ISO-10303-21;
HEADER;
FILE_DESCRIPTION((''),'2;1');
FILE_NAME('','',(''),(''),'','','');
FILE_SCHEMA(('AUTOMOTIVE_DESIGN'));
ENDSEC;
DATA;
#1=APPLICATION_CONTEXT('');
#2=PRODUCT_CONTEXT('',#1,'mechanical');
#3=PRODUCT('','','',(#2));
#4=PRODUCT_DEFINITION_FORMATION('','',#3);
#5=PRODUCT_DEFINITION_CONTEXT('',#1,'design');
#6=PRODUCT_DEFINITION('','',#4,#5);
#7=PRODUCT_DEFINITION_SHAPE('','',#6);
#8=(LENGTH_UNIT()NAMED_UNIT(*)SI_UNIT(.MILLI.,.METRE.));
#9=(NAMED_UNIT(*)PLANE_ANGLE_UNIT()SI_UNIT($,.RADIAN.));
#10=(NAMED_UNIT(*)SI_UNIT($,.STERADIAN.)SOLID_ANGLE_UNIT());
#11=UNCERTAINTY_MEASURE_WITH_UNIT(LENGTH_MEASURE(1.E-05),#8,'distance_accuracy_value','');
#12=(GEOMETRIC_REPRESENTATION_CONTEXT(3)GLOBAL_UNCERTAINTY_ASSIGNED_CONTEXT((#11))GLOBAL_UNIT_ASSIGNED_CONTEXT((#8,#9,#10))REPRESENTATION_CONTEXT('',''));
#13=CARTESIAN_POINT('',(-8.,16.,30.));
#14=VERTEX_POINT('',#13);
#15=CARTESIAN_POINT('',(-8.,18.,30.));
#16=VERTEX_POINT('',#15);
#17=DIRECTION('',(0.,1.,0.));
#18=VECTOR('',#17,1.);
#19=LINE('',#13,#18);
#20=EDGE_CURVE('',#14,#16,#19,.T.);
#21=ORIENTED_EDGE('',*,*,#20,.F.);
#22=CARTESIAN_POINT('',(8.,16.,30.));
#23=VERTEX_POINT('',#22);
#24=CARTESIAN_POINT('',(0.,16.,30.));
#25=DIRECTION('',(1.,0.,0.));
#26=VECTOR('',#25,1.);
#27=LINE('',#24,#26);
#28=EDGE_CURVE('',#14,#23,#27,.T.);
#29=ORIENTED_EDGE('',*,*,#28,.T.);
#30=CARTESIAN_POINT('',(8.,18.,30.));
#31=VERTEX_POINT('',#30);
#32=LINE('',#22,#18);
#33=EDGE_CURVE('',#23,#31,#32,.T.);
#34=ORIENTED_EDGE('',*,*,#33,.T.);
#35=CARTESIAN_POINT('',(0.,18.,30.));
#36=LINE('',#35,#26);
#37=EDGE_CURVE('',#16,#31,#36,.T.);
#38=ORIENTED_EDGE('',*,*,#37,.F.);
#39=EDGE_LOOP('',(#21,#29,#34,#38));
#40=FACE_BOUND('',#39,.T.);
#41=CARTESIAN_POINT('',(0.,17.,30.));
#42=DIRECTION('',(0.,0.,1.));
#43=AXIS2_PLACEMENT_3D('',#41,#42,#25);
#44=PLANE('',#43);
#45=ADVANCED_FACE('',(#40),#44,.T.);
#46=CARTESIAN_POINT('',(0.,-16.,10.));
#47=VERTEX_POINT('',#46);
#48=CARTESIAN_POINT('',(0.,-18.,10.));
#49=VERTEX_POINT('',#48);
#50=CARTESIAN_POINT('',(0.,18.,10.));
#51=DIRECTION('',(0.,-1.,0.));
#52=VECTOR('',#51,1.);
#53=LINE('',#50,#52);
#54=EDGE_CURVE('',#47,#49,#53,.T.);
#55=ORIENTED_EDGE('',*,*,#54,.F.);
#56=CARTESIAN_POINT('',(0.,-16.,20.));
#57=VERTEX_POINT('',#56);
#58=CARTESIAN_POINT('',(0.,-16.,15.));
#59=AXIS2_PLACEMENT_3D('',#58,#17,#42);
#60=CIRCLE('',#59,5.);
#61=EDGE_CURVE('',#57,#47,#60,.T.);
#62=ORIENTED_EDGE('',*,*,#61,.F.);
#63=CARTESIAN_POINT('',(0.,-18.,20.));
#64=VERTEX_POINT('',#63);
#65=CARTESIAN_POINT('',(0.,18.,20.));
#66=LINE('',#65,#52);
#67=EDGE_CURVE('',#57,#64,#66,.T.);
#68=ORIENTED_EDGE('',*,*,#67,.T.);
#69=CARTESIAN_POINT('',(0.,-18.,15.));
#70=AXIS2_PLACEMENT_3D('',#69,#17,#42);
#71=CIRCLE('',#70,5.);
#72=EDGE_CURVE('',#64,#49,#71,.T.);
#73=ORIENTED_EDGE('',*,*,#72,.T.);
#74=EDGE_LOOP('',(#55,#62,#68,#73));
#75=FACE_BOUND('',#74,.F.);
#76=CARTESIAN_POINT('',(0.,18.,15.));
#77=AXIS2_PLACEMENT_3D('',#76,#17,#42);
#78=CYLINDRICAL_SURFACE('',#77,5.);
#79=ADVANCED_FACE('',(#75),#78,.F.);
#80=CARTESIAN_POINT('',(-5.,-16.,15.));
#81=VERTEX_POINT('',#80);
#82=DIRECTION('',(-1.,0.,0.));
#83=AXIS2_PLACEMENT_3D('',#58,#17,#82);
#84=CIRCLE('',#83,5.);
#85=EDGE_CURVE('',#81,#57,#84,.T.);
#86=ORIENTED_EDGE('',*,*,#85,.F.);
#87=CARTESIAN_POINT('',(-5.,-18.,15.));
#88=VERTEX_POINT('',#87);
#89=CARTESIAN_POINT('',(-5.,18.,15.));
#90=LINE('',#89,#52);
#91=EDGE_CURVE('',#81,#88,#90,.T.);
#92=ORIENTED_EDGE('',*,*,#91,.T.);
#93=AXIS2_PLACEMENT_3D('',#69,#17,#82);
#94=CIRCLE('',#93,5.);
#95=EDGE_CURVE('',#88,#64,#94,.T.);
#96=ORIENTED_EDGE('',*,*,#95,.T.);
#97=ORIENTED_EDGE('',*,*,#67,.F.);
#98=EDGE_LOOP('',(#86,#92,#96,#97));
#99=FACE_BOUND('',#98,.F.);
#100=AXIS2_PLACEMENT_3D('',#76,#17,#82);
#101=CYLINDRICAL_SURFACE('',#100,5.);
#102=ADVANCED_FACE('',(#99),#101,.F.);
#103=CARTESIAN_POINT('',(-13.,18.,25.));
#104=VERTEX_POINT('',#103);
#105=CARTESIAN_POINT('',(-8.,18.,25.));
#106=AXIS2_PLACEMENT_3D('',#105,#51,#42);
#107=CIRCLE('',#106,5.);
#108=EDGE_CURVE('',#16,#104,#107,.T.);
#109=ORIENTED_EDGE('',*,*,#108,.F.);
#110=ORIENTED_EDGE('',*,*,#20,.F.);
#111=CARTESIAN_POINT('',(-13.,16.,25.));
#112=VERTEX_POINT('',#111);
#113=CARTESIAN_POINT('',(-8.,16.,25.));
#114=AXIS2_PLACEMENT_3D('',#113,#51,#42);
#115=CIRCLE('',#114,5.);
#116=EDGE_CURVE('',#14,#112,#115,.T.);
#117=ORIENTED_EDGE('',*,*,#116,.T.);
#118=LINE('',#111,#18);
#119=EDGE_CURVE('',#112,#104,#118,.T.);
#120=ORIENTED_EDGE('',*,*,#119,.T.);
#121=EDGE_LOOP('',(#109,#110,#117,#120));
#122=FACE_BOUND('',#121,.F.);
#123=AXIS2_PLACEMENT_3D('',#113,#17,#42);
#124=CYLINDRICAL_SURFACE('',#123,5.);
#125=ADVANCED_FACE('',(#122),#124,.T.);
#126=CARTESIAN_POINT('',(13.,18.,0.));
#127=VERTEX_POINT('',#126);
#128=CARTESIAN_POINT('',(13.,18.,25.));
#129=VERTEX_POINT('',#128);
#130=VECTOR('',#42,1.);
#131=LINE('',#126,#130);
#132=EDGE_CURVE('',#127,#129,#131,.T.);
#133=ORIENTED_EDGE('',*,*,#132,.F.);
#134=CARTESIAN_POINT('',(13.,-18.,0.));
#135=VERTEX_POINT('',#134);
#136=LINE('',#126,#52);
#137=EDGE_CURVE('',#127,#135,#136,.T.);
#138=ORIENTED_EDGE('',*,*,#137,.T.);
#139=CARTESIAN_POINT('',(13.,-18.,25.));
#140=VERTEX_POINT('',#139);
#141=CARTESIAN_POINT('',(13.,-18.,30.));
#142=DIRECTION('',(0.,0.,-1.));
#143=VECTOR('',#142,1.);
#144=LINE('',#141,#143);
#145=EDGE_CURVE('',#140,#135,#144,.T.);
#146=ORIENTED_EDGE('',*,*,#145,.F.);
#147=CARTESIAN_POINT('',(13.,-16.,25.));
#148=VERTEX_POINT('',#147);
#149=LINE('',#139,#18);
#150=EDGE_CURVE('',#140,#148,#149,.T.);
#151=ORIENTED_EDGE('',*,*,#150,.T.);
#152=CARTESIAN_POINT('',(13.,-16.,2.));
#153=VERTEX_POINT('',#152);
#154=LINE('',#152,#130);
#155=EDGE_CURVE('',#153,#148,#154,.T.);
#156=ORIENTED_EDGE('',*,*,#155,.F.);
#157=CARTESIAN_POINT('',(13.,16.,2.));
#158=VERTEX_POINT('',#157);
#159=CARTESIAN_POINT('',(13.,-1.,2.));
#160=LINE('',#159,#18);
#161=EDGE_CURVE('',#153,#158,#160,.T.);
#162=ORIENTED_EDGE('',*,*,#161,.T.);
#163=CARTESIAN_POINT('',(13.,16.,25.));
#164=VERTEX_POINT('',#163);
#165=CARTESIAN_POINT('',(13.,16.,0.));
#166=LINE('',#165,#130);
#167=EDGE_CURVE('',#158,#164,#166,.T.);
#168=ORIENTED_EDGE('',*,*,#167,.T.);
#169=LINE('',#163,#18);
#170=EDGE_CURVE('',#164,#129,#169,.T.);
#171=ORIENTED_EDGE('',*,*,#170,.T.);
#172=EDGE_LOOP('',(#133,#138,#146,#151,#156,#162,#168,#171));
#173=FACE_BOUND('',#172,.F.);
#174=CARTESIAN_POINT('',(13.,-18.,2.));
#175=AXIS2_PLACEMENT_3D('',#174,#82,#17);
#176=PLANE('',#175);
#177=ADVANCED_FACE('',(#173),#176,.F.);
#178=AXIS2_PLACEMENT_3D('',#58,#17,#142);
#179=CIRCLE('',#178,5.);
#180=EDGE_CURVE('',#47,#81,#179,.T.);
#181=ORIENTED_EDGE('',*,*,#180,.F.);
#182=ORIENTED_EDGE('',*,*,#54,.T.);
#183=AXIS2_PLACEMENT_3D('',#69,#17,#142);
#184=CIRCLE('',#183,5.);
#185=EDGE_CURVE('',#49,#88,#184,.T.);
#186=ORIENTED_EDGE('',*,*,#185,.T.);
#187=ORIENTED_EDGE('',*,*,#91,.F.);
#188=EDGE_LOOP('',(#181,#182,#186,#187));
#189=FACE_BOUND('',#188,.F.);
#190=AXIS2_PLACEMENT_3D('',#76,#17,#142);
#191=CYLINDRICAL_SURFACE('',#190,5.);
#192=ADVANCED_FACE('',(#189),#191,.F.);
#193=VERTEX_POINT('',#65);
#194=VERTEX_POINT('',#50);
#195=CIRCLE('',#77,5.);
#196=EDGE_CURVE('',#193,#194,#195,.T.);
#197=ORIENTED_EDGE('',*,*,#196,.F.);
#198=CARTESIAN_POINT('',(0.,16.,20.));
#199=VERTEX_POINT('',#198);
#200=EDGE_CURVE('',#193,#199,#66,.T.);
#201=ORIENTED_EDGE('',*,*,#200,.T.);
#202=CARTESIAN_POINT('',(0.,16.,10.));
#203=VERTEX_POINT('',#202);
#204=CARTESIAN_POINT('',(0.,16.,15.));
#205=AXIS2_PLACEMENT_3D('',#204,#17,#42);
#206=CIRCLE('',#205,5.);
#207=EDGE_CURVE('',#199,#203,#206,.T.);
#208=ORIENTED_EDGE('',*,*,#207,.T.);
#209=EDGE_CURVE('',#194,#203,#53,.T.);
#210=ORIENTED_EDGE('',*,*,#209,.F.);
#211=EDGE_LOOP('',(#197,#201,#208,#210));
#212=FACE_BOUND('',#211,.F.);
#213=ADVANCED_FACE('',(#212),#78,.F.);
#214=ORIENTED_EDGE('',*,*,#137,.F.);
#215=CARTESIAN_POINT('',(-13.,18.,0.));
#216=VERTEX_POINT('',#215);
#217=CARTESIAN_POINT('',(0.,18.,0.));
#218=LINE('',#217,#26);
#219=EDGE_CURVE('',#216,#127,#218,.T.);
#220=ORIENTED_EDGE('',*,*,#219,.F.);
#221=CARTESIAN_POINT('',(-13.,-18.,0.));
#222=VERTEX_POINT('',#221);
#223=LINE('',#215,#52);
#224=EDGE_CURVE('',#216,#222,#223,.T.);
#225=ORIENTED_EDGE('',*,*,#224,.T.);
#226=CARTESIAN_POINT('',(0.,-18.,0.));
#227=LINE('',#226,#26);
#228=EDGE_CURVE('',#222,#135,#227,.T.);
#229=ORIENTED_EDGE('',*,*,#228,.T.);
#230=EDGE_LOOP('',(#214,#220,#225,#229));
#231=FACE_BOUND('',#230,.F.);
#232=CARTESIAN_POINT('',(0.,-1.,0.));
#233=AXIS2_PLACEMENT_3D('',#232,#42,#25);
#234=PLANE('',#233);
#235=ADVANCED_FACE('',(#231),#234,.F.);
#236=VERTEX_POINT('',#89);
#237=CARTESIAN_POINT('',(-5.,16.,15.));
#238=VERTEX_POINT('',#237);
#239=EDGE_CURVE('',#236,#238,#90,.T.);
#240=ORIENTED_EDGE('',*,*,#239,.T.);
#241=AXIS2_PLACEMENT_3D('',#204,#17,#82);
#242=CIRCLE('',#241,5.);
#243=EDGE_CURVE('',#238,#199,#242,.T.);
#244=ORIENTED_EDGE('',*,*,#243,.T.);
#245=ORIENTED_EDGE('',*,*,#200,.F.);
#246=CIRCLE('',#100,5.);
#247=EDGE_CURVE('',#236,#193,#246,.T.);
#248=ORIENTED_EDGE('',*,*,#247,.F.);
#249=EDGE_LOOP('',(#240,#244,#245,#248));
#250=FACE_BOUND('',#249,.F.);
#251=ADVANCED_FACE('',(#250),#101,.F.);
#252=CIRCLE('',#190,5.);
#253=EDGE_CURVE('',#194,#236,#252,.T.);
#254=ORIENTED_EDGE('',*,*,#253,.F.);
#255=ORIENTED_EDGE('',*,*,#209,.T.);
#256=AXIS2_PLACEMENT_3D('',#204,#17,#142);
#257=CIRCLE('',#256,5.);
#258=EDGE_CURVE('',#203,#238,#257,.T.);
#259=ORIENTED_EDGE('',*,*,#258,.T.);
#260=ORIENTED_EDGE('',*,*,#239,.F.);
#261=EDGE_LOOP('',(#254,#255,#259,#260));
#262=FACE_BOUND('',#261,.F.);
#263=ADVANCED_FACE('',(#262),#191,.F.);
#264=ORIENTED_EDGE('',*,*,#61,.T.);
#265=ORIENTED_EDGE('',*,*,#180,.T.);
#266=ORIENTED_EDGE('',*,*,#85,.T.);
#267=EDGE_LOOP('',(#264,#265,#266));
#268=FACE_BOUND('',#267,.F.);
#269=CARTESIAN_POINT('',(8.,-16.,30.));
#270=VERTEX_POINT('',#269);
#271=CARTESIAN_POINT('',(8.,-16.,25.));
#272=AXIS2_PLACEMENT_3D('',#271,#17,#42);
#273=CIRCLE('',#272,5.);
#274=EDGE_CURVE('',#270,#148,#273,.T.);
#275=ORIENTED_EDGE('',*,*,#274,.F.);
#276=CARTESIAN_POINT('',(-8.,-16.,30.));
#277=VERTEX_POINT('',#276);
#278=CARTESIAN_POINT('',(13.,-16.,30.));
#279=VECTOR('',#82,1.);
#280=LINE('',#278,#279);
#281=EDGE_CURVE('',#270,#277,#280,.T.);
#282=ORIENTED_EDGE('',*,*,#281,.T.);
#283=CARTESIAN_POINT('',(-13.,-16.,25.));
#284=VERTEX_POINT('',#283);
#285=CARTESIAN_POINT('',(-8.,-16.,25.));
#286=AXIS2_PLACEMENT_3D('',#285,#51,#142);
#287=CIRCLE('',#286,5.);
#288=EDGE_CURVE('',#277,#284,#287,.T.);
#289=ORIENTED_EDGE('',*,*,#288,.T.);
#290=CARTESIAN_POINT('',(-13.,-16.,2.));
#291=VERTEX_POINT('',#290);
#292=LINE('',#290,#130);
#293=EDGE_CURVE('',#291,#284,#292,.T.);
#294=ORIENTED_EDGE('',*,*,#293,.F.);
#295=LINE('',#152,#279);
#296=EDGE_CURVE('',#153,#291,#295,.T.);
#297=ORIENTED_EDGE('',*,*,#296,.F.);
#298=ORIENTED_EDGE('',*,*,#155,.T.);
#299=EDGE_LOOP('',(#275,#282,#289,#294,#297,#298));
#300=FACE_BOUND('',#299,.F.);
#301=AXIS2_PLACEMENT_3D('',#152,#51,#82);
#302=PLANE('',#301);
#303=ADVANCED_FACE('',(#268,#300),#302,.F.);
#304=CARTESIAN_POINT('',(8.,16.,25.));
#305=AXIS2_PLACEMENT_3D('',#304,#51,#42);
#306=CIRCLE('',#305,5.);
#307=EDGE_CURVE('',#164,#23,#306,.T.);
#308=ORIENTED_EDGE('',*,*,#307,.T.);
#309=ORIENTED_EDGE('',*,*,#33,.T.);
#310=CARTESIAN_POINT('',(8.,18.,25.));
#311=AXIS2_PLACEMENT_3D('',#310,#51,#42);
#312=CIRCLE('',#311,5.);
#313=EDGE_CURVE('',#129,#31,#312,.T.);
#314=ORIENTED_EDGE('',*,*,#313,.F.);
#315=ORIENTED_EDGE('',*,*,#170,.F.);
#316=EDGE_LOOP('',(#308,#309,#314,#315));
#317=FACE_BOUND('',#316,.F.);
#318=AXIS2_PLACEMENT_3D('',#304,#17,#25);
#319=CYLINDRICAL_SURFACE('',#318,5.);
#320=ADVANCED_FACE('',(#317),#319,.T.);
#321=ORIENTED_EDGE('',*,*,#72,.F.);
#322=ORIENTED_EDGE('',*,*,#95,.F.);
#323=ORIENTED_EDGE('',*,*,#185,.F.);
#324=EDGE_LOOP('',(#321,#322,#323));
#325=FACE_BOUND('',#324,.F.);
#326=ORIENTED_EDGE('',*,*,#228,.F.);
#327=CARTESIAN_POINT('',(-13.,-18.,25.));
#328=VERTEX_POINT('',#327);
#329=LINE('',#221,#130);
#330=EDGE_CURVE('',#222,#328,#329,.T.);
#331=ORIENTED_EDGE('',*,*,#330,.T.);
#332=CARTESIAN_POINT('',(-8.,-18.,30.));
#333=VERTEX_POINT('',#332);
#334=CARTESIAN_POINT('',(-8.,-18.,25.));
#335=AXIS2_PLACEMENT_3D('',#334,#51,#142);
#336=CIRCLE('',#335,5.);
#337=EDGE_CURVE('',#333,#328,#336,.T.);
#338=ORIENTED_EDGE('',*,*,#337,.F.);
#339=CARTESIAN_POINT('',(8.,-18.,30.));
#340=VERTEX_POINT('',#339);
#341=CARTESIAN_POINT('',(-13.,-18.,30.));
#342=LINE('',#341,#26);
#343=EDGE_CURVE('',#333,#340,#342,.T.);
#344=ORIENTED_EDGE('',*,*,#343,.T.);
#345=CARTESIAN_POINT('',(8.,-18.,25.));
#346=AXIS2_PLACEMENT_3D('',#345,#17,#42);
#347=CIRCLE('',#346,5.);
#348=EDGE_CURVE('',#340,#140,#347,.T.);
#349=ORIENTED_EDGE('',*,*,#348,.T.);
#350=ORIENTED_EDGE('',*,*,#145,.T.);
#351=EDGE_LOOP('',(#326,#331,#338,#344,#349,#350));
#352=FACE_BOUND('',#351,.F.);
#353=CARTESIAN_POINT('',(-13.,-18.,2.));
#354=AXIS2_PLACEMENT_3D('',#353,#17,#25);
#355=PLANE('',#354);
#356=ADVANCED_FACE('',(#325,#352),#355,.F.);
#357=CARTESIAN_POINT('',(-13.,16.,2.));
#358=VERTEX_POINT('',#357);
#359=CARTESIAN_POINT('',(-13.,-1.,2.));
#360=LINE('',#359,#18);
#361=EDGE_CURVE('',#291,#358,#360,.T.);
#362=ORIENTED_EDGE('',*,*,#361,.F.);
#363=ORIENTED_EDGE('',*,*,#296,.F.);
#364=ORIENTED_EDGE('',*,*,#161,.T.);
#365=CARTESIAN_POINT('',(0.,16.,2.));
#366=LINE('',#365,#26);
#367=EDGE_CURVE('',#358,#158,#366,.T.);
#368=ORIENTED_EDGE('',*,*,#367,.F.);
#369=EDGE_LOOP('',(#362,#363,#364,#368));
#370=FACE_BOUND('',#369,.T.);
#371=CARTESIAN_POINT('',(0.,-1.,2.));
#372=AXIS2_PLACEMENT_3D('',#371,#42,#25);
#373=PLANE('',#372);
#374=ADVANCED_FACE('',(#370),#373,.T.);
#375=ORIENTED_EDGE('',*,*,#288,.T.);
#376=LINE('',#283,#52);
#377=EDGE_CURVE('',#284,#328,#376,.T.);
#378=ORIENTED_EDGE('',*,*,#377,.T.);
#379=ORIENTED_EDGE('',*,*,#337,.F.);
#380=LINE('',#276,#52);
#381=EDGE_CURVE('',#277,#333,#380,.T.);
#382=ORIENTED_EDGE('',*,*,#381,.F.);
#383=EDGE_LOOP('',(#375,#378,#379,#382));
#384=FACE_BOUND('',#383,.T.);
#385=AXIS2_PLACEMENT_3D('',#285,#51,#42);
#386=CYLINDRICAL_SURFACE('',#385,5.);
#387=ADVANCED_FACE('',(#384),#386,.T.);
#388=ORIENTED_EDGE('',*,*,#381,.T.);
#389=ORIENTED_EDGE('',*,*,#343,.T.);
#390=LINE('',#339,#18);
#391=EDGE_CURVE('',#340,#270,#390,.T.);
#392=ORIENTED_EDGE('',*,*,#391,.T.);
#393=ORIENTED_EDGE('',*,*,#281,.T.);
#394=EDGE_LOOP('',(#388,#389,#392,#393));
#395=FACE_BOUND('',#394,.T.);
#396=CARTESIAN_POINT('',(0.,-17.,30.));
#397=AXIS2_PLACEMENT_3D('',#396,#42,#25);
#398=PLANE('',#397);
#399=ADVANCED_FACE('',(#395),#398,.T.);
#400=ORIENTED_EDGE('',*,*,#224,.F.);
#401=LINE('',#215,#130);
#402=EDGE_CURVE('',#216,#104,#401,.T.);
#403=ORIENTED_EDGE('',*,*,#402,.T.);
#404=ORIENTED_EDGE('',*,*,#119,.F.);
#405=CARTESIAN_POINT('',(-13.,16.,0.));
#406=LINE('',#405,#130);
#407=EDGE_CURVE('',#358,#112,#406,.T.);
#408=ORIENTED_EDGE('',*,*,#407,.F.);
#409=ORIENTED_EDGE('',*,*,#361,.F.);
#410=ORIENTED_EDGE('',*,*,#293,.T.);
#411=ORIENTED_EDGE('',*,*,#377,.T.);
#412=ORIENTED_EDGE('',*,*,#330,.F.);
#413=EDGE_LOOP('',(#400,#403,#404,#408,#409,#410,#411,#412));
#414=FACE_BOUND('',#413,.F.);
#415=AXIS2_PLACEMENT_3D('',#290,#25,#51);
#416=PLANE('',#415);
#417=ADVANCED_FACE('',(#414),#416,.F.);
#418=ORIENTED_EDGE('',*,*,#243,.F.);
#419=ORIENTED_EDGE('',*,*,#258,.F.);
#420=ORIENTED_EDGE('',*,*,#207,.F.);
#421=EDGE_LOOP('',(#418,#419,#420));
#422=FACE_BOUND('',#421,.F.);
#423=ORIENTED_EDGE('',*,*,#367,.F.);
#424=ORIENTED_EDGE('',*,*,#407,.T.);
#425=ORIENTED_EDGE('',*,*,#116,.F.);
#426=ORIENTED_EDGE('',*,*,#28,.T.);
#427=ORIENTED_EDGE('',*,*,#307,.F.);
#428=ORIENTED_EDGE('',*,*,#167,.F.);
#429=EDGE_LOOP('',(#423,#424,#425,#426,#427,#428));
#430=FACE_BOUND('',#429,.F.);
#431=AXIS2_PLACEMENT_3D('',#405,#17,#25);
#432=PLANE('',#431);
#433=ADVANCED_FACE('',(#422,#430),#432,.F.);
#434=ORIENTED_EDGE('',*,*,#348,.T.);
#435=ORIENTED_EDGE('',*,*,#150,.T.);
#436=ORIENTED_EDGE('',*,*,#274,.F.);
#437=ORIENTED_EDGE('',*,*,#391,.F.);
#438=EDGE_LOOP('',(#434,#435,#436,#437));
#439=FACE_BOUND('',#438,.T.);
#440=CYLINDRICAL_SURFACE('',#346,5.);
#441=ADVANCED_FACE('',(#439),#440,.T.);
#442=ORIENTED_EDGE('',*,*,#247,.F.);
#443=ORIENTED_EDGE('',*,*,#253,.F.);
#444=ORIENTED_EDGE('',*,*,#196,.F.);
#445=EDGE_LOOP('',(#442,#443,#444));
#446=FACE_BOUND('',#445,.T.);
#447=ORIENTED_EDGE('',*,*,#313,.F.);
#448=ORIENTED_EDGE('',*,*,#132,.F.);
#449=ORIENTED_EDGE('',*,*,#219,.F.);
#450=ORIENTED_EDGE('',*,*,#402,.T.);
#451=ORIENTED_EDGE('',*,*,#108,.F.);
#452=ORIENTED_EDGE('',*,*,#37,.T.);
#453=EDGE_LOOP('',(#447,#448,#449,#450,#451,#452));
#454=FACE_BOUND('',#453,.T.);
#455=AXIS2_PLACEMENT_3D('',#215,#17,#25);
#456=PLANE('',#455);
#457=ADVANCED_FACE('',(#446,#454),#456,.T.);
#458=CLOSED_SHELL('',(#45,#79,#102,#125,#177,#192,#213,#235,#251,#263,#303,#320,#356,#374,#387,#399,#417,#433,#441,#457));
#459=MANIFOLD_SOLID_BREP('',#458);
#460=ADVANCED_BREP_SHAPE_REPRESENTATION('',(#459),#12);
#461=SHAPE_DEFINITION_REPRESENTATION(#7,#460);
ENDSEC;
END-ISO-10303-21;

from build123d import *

# Parameters (mm, degrees)
F0_W     = 26
F0_H     = 2
F1_DEPTH = 30
F0_H_2   = 34
F2_DEPTH = 2
F4_DEPTH = 28
F5_R     = 5
F6_R     = 5
F9_DEPTH = 100


# Not quite as in the source:
# - a feature of the source that left no trace in its solid (it failed there, or was rolled back) is left out


with BuildPart() as f1:
    # F0 (on Top) → F1 (new body)
    with BuildSketch(Plane.XY):
        with Locations((0, 17)):
            Rectangle(F0_W, F0_H)
    extrude(amount=F1_DEPTH)

    # F0 (on Top) → F2 (join)
    with BuildSketch(Plane.XY):
        with Locations((0, -1)):
            Rectangle(F0_W, F0_H_2)
    extrude(amount=F2_DEPTH)

    # F3 (on face) → F4 (join)
    with BuildSketch(Plane.XY.offset(2)):
        Polygon((13, -16), (0, -16), (-13, -16), (-13, -18), (13, -18), align=None)
    extrude(amount=F4_DEPTH)

    # F5
    f5_edges = [f1.edges().sort_by_distance(p)[0] for p in [
        (-13, 17, 30),
        (-13, -17, 30),
    ]]
    fillet(f5_edges, radius=F5_R)

    # F6
    f6_edges = [f1.edges().sort_by_distance(p)[0] for p in [
        (13, 17, 30),
        (13, -17, 30),
    ]]
    fillet(f6_edges, radius=F6_R)

    # F8 (on face) → F9 (cut)
    with BuildSketch(Plane(origin=(0, 18, 0), x_dir=(-1, 0, 0), z_dir=(0, 1, 0))):
        with BuildLine():
            ThreePointArc((5, 15), (3.5355339059, 18.5355339059), (0, 20))
            Line((0, 20), (0, 10))
            ThreePointArc((0, 10), (3.5355339059, 11.4644660941), (5, 15))
        make_face()
        with BuildLine():
            Line((0, 10), (0, 20))
            ThreePointArc((0, 20), (-5, 15), (0, 10))
        make_face()
    extrude(amount=-F9_DEPTH, mode=Mode.SUBTRACT)


solid = f1.part
